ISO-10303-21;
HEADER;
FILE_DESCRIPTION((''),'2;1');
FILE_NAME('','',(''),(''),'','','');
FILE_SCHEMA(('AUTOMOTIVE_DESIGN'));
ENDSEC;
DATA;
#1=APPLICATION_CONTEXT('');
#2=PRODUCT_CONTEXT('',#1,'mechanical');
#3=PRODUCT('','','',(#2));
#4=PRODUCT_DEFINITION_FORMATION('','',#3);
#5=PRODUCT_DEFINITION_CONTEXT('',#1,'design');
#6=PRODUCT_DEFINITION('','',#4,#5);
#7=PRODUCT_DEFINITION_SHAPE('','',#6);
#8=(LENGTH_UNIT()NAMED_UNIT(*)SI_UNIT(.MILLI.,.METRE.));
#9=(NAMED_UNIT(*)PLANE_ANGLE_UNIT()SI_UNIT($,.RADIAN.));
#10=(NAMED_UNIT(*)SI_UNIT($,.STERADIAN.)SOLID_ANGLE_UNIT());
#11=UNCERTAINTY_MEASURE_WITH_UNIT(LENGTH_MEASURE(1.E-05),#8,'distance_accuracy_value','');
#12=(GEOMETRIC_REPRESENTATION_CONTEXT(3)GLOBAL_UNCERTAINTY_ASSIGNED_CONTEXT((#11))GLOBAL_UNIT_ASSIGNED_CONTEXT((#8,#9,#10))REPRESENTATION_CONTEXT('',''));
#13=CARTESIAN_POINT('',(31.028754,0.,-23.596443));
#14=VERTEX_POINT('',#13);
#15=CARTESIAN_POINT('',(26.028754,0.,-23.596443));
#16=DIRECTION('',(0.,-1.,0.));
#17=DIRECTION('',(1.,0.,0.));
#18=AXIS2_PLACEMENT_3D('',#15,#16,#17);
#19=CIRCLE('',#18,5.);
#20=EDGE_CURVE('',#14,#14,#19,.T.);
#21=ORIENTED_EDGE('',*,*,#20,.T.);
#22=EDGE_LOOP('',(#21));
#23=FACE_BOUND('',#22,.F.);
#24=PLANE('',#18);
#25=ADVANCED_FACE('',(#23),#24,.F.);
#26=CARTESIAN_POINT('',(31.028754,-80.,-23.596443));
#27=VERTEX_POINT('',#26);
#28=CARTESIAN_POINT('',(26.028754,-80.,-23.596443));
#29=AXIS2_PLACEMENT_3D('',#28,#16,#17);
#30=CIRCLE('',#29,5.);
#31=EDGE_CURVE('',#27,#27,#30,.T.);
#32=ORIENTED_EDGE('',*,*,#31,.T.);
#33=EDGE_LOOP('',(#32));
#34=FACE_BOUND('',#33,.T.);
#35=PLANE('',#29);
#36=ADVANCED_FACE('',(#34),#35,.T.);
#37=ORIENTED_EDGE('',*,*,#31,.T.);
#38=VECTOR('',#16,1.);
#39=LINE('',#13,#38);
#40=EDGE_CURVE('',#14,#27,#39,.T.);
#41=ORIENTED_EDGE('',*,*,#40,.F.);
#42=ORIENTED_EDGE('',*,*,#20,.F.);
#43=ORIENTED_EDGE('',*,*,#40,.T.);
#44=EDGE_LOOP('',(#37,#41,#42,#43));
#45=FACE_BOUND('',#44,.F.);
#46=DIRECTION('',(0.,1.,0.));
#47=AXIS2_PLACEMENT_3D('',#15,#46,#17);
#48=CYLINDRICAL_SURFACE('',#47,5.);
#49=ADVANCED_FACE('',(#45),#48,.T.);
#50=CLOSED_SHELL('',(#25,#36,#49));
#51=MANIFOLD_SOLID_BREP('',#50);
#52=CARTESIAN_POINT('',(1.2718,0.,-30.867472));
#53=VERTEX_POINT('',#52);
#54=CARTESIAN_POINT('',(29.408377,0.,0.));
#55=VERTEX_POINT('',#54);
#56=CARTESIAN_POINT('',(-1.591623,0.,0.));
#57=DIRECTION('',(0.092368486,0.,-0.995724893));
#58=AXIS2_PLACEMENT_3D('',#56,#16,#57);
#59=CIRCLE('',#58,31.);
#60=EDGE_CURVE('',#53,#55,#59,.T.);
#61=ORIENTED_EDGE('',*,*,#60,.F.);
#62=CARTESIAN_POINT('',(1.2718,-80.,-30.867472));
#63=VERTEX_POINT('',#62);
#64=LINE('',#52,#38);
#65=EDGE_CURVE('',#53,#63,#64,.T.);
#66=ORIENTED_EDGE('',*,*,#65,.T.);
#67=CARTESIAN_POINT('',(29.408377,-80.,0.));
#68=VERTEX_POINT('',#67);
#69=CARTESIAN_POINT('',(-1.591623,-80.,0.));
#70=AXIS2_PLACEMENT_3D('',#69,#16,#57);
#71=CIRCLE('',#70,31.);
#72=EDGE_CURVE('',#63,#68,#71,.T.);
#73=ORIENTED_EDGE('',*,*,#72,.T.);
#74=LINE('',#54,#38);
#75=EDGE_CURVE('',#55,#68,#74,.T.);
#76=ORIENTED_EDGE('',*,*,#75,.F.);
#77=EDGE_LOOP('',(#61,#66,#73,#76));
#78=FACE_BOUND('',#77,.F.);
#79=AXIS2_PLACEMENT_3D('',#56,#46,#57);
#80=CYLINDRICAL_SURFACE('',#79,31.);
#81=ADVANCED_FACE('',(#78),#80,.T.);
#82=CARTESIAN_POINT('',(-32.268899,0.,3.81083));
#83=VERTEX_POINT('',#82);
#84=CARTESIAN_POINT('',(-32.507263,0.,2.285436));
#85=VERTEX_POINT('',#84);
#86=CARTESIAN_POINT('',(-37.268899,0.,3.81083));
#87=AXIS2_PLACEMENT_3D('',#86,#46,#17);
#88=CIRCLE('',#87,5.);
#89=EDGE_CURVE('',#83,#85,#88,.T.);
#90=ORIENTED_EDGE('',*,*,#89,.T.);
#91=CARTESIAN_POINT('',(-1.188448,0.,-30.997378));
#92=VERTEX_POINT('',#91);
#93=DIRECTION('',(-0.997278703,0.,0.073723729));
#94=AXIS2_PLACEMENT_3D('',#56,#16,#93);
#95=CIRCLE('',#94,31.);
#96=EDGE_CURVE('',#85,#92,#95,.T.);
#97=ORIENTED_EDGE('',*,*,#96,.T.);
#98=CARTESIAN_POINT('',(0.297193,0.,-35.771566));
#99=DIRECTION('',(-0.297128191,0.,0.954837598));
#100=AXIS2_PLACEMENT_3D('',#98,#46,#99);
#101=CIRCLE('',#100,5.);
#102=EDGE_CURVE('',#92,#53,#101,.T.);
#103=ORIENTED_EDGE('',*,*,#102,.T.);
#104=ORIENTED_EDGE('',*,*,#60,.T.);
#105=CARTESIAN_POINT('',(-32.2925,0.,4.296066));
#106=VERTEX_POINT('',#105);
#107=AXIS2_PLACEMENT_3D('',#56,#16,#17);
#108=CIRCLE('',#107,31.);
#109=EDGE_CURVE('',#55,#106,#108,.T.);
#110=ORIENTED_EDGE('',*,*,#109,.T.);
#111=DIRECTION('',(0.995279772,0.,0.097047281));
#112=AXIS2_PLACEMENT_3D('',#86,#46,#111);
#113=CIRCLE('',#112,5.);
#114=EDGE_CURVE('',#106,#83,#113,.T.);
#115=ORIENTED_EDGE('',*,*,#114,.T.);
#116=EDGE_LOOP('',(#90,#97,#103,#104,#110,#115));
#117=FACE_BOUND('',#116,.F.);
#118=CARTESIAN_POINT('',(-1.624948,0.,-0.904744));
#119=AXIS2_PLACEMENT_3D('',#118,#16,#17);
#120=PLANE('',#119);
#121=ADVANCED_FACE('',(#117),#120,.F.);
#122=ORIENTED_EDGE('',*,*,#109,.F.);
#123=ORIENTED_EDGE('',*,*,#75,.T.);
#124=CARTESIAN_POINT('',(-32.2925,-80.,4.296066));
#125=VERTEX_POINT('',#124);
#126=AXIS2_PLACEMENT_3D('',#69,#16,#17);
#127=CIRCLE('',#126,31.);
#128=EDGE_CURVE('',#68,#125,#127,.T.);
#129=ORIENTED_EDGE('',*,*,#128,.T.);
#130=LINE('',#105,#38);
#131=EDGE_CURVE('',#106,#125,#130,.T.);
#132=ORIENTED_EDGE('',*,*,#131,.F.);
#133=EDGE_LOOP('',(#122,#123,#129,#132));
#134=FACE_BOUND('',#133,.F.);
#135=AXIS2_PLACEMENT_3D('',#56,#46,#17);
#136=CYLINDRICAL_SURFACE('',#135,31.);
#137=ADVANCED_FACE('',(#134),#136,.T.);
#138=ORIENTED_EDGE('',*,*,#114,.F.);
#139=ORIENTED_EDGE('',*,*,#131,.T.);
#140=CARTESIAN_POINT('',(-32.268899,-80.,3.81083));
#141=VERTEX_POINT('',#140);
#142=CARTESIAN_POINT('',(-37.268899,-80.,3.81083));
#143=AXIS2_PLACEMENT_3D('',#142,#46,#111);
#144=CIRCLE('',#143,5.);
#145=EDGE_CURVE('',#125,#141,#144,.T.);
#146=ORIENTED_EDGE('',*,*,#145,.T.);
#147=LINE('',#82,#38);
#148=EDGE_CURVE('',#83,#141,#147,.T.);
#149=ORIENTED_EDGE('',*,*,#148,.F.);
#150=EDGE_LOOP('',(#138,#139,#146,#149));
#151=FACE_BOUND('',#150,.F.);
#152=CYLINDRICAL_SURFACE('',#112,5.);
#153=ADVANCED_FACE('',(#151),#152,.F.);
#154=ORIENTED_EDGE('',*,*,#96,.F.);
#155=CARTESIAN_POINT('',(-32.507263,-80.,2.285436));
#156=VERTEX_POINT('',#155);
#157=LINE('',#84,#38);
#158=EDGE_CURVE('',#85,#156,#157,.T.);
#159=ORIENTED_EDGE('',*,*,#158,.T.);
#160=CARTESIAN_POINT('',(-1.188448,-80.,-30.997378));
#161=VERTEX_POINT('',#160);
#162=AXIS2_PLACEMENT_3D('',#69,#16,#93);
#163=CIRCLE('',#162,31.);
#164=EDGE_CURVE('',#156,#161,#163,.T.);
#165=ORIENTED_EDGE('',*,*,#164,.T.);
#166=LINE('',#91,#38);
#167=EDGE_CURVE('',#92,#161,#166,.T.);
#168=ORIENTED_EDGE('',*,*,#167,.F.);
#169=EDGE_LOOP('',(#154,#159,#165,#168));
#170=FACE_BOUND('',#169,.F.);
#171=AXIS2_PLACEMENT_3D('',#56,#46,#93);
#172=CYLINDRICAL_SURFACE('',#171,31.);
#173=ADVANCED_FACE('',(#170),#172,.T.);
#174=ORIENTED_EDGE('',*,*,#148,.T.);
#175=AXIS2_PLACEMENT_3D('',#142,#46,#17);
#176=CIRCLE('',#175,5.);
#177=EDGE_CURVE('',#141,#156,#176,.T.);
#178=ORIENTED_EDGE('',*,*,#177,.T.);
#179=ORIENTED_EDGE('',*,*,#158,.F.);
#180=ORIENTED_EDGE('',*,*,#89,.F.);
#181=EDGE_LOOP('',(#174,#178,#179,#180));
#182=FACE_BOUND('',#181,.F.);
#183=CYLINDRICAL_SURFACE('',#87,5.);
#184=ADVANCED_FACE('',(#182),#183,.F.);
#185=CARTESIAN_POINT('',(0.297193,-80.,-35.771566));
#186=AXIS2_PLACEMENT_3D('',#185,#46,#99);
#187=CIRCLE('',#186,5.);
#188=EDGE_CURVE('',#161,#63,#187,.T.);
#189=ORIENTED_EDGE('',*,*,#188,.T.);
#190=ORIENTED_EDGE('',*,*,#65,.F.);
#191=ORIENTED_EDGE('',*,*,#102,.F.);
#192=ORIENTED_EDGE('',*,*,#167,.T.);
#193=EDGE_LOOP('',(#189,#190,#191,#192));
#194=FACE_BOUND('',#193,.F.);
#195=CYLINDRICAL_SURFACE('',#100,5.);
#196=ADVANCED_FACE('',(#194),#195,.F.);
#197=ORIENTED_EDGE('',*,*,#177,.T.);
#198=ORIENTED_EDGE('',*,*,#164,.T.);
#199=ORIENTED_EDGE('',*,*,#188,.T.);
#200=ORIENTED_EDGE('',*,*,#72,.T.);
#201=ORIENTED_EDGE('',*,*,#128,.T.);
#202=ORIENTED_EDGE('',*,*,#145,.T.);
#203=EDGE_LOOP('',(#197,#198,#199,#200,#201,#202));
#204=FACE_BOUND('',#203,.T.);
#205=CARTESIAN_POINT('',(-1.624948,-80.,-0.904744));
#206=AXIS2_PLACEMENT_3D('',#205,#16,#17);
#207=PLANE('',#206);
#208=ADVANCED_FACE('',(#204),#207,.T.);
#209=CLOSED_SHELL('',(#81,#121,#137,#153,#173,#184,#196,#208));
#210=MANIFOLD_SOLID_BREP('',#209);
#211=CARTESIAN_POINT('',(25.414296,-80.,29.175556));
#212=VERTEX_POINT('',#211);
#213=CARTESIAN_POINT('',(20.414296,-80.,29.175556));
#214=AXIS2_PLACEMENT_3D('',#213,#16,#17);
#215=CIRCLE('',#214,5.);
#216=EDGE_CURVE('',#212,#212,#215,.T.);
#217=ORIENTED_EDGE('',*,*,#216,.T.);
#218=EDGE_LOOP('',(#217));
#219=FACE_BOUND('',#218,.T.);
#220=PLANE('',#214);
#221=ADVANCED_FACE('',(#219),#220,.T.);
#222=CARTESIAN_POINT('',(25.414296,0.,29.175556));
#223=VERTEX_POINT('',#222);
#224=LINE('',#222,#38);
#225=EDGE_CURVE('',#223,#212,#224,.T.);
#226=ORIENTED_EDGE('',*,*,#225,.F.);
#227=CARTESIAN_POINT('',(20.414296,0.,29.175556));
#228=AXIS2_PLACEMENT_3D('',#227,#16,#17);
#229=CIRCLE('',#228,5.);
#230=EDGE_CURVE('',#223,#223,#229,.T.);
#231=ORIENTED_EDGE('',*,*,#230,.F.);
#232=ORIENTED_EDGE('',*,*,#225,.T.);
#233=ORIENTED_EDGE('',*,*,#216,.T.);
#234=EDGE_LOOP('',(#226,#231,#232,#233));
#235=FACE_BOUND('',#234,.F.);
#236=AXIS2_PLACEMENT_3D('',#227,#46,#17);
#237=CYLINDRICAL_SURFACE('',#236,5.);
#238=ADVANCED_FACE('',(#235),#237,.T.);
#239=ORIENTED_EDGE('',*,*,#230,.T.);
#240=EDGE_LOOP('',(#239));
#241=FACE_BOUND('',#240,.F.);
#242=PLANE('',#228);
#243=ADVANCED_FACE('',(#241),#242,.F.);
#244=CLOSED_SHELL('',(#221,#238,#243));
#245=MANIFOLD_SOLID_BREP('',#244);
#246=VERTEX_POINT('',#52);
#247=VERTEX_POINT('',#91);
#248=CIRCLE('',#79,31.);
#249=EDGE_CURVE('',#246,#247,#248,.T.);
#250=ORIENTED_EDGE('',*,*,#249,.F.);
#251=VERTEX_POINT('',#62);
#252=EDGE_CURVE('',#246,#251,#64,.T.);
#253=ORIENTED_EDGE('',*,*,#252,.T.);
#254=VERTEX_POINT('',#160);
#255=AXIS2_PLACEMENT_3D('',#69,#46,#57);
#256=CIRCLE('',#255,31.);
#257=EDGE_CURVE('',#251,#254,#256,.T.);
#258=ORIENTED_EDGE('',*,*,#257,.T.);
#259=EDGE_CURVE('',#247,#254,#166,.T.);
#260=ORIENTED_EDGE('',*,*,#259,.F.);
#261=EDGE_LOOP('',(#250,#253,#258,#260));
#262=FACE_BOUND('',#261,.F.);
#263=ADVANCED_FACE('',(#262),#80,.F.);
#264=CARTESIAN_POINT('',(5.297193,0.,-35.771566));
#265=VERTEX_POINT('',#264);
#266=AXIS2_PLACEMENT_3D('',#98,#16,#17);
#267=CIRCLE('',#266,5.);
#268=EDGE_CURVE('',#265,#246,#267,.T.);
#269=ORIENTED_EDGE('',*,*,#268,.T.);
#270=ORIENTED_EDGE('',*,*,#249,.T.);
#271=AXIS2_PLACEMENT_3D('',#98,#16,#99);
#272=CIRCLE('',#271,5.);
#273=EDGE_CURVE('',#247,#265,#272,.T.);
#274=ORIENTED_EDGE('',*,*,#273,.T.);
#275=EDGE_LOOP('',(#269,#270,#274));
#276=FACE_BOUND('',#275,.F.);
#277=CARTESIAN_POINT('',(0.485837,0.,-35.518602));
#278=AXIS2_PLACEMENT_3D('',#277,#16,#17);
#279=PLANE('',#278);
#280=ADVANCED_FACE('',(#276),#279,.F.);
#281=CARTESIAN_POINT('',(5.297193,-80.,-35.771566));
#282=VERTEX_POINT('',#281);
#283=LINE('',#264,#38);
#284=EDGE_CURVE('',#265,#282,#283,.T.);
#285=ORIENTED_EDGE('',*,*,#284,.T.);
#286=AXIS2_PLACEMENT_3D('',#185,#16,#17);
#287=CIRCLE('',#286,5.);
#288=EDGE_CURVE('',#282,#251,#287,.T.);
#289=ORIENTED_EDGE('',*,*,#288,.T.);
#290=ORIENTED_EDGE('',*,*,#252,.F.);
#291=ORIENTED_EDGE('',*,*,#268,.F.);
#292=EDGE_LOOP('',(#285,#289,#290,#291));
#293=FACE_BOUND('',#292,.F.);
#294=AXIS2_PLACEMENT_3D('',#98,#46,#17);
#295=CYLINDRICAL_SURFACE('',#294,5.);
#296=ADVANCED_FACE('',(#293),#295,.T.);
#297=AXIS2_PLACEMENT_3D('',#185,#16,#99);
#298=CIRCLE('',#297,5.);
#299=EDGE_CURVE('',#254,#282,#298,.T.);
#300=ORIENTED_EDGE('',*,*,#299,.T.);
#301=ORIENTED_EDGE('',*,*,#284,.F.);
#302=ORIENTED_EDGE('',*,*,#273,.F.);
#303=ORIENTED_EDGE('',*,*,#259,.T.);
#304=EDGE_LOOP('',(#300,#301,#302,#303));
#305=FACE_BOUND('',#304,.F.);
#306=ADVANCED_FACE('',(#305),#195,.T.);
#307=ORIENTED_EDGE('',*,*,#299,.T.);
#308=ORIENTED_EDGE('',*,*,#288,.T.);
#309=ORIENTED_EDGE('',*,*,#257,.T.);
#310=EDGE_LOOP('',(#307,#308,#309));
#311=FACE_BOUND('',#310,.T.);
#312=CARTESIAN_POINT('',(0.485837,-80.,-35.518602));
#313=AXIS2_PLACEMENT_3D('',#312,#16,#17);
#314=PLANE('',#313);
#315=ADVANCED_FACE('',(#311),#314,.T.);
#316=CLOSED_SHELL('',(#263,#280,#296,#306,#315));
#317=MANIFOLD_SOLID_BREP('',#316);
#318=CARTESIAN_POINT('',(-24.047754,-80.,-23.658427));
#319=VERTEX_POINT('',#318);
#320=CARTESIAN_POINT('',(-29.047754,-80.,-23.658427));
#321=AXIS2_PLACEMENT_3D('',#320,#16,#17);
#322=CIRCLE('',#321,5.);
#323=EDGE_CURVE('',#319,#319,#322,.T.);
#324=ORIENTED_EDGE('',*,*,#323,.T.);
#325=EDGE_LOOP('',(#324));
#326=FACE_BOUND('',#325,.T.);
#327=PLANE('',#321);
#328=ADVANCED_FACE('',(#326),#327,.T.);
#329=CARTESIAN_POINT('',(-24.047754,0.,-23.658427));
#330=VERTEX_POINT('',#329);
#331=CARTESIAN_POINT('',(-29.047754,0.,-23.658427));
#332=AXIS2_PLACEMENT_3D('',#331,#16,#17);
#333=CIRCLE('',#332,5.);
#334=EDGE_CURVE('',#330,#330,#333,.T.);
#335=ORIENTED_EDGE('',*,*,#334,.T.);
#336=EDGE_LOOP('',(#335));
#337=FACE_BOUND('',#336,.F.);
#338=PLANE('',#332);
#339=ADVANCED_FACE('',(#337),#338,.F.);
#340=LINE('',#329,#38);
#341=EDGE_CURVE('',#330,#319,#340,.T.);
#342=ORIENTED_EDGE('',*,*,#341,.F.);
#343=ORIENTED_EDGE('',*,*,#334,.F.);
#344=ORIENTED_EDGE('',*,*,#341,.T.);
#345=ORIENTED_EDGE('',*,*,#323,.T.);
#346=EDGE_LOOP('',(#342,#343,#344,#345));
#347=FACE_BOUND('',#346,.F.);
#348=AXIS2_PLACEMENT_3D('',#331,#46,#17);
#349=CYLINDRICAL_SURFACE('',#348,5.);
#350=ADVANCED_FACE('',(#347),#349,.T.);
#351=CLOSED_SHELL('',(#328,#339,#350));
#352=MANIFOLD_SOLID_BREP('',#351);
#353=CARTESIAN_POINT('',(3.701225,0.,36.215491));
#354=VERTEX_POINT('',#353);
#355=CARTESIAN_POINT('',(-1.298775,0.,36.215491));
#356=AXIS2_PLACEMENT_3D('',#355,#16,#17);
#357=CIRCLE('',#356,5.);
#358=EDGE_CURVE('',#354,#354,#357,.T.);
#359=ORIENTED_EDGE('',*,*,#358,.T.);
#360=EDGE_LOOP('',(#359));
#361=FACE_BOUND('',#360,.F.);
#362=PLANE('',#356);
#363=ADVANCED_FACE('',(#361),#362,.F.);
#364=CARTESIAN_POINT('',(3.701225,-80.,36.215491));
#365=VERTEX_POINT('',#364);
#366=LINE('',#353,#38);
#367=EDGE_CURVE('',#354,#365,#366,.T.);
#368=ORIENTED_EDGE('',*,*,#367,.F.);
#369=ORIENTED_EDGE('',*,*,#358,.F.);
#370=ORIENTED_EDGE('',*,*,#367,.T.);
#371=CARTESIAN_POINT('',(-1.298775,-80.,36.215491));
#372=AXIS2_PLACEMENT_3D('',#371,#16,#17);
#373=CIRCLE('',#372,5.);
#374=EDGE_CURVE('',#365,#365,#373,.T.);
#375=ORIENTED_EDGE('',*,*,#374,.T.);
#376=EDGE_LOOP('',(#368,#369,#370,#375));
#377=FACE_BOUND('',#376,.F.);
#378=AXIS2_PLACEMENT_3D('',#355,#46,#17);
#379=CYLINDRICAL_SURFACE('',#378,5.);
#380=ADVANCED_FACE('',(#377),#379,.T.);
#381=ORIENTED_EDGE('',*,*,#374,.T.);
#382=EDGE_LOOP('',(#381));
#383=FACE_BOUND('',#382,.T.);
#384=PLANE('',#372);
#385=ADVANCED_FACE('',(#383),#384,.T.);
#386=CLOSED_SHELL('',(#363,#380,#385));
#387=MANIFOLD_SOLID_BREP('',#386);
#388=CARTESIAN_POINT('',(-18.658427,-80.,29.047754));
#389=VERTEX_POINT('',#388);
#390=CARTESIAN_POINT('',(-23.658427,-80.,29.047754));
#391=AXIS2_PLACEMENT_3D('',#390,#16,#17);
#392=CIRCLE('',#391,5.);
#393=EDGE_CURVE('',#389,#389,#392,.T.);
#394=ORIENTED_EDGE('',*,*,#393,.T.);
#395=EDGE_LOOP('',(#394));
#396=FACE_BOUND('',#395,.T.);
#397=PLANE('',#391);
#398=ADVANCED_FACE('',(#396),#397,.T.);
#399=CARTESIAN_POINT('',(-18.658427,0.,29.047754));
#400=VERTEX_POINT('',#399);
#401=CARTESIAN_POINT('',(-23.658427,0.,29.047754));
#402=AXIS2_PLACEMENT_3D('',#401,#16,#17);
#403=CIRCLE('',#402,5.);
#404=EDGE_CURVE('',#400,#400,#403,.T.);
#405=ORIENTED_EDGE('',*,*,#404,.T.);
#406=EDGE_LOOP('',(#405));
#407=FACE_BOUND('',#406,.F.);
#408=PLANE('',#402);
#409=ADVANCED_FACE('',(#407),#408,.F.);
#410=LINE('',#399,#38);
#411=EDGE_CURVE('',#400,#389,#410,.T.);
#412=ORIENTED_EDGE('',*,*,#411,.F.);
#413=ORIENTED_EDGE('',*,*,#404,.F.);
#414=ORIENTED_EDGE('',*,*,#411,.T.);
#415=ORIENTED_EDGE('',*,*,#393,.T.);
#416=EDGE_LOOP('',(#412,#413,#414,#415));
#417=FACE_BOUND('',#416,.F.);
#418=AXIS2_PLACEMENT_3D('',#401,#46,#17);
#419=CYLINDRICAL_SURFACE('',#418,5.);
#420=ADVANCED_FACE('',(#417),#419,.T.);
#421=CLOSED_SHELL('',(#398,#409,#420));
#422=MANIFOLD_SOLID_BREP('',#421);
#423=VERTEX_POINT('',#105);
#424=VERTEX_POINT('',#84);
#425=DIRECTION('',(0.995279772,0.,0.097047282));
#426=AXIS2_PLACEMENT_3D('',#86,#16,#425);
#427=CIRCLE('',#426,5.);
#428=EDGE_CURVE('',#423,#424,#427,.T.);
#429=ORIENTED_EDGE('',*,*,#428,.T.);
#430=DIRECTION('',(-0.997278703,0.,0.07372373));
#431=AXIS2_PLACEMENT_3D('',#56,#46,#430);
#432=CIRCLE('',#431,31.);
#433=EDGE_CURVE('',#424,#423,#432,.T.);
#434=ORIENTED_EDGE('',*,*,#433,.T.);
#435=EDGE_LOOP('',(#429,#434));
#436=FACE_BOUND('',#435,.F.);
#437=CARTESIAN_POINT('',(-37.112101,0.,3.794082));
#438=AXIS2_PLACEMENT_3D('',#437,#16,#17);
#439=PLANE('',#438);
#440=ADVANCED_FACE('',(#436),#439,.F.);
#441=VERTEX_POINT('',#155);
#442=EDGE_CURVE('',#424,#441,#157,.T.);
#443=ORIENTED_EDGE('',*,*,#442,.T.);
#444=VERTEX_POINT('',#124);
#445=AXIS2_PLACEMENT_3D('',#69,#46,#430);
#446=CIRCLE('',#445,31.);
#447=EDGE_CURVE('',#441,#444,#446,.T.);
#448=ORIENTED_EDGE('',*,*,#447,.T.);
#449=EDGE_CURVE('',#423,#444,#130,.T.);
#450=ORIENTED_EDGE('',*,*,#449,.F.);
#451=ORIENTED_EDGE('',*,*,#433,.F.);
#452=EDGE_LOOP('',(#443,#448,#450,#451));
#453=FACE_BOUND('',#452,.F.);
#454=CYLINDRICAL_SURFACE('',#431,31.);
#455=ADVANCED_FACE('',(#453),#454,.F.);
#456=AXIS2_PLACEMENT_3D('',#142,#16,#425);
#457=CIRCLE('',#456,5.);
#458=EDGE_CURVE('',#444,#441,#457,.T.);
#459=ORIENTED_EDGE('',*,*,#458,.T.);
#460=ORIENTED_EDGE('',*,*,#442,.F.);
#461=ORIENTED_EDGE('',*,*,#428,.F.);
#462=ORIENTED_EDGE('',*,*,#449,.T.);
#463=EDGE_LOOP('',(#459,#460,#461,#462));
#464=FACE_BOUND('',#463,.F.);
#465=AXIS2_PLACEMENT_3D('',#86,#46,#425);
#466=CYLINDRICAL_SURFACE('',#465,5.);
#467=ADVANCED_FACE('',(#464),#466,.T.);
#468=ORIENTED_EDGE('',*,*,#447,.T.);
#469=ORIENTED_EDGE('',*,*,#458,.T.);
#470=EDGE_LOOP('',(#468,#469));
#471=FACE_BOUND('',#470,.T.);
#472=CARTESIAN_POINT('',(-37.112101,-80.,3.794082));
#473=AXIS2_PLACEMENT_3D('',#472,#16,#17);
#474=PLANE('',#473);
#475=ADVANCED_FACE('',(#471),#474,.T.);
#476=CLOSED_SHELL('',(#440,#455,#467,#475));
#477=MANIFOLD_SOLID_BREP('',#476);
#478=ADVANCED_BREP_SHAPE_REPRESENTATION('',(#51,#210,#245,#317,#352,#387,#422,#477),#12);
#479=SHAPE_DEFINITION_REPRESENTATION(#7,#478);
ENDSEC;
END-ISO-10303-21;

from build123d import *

# Parameters (mm, degrees)
F1_DEPTH = 80
F0_R     = 5


with BuildPart() as f1:
    # F0 (on Front) → F1 (new body)
    with BuildSketch(Plane.XZ):
        with BuildLine():
            ThreePointArc((1.2717998454, -30.8674716863), (21.3187032133, -20.8834130919), (29.4083767724, 0))
            ThreePointArc((29.4083767724, 0), (0.5616103001, 30.9251287043), (-32.2924997034, 4.2960660629))
            ThreePointArc((-32.2924997034, 4.2960660629), (-32.274802335, 4.05373467), (-32.2688985649, 3.810829655))
            ThreePointArc((-32.2688985649, 3.810829655), (-32.3288490863, 3.0388768397), (-32.5072630246, 2.2854356139))
            ThreePointArc((-32.5072630246, 2.2854356139), (-24.1679170215, -21.2440805528), (-1.1884477149, -30.997378107))
            ThreePointArc((-1.1884477149, -30.997378107), (0.0335496433, -30.7785217279), (1.2717998454, -30.8674716863))
        make_face()
    extrude(amount=F1_DEPTH)


with BuildPart() as f1b:
    # F0 (on Front) → F1, piece 2 (new body)
    with BuildSketch(Plane.XZ):
        with BuildLine():
            ThreePointArc((-32.5072630246, 2.2854356139), (-32.4162793992, 3.2925023768), (-32.2924997034, 4.2960660629))
            ThreePointArc((-32.2924997034, 4.2960660629), (-42.2406173023, 4.3418784255), (-32.5072630246, 2.2854356139))
        make_face()
    extrude(amount=F1_DEPTH)


with BuildPart() as f1c:
    # F0 (on Front) → F1, piece 3 (new body)
    with BuildSketch(Plane.XZ):
        with BuildLine():
            ThreePointArc((5.2971932426, -35.771566095), (4.1619722152, -32.5992666935), (1.2717998454, -30.8674716863))
            ThreePointArc((1.2717998454, -30.8674716863), (0.0429670879, -30.9568750765), (-1.1884477149, -30.997378107))
            ThreePointArc((-1.1884477149, -30.997378107), (-2.6669082413, -39.7982399574), (5.2971932426, -35.771566095))
        make_face()
    extrude(amount=F1_DEPTH)


with BuildPart() as f1d:
    # F0 (on Front) → F1, piece 4 (new body)
    with BuildSketch(Plane.XZ):
        with Locations((-23.6584274116, 29.0477543936)):
            Circle(F0_R)
    extrude(amount=F1_DEPTH)


with BuildPart() as f1e:
    # F0 (on Front) → F1, piece 5 (new body)
    with BuildSketch(Plane.XZ):
        with Locations((-29.0477543936, -23.6584274116)):
            Circle(F0_R)
    extrude(amount=F1_DEPTH)


with BuildPart() as f1f:
    # F0 (on Front) → F1, piece 6 (new body)
    with BuildSketch(Plane.XZ):
        with Locations((20.4142962822, 29.1755563039)):
            Circle(F0_R)
    extrude(amount=F1_DEPTH)


with BuildPart() as f1g:
    # F0 (on Front) → F1, piece 7 (new body)
    with BuildSketch(Plane.XZ):
        with Locations((26.028754213, -23.5964425308)):
            Circle(F0_R)
    extrude(amount=F1_DEPTH)


with BuildPart() as f1h:
    # F0 (on Front) → F1, piece 8 (new body)
    with BuildSketch(Plane.XZ):
        with Locations((-1.2987746409, 36.2154911415)):
            Circle(F0_R)
    extrude(amount=F1_DEPTH)


solid = Compound([f1.part, f1b.part, f1c.part, f1d.part, f1e.part, f1f.part, f1g.part, f1h.part])
